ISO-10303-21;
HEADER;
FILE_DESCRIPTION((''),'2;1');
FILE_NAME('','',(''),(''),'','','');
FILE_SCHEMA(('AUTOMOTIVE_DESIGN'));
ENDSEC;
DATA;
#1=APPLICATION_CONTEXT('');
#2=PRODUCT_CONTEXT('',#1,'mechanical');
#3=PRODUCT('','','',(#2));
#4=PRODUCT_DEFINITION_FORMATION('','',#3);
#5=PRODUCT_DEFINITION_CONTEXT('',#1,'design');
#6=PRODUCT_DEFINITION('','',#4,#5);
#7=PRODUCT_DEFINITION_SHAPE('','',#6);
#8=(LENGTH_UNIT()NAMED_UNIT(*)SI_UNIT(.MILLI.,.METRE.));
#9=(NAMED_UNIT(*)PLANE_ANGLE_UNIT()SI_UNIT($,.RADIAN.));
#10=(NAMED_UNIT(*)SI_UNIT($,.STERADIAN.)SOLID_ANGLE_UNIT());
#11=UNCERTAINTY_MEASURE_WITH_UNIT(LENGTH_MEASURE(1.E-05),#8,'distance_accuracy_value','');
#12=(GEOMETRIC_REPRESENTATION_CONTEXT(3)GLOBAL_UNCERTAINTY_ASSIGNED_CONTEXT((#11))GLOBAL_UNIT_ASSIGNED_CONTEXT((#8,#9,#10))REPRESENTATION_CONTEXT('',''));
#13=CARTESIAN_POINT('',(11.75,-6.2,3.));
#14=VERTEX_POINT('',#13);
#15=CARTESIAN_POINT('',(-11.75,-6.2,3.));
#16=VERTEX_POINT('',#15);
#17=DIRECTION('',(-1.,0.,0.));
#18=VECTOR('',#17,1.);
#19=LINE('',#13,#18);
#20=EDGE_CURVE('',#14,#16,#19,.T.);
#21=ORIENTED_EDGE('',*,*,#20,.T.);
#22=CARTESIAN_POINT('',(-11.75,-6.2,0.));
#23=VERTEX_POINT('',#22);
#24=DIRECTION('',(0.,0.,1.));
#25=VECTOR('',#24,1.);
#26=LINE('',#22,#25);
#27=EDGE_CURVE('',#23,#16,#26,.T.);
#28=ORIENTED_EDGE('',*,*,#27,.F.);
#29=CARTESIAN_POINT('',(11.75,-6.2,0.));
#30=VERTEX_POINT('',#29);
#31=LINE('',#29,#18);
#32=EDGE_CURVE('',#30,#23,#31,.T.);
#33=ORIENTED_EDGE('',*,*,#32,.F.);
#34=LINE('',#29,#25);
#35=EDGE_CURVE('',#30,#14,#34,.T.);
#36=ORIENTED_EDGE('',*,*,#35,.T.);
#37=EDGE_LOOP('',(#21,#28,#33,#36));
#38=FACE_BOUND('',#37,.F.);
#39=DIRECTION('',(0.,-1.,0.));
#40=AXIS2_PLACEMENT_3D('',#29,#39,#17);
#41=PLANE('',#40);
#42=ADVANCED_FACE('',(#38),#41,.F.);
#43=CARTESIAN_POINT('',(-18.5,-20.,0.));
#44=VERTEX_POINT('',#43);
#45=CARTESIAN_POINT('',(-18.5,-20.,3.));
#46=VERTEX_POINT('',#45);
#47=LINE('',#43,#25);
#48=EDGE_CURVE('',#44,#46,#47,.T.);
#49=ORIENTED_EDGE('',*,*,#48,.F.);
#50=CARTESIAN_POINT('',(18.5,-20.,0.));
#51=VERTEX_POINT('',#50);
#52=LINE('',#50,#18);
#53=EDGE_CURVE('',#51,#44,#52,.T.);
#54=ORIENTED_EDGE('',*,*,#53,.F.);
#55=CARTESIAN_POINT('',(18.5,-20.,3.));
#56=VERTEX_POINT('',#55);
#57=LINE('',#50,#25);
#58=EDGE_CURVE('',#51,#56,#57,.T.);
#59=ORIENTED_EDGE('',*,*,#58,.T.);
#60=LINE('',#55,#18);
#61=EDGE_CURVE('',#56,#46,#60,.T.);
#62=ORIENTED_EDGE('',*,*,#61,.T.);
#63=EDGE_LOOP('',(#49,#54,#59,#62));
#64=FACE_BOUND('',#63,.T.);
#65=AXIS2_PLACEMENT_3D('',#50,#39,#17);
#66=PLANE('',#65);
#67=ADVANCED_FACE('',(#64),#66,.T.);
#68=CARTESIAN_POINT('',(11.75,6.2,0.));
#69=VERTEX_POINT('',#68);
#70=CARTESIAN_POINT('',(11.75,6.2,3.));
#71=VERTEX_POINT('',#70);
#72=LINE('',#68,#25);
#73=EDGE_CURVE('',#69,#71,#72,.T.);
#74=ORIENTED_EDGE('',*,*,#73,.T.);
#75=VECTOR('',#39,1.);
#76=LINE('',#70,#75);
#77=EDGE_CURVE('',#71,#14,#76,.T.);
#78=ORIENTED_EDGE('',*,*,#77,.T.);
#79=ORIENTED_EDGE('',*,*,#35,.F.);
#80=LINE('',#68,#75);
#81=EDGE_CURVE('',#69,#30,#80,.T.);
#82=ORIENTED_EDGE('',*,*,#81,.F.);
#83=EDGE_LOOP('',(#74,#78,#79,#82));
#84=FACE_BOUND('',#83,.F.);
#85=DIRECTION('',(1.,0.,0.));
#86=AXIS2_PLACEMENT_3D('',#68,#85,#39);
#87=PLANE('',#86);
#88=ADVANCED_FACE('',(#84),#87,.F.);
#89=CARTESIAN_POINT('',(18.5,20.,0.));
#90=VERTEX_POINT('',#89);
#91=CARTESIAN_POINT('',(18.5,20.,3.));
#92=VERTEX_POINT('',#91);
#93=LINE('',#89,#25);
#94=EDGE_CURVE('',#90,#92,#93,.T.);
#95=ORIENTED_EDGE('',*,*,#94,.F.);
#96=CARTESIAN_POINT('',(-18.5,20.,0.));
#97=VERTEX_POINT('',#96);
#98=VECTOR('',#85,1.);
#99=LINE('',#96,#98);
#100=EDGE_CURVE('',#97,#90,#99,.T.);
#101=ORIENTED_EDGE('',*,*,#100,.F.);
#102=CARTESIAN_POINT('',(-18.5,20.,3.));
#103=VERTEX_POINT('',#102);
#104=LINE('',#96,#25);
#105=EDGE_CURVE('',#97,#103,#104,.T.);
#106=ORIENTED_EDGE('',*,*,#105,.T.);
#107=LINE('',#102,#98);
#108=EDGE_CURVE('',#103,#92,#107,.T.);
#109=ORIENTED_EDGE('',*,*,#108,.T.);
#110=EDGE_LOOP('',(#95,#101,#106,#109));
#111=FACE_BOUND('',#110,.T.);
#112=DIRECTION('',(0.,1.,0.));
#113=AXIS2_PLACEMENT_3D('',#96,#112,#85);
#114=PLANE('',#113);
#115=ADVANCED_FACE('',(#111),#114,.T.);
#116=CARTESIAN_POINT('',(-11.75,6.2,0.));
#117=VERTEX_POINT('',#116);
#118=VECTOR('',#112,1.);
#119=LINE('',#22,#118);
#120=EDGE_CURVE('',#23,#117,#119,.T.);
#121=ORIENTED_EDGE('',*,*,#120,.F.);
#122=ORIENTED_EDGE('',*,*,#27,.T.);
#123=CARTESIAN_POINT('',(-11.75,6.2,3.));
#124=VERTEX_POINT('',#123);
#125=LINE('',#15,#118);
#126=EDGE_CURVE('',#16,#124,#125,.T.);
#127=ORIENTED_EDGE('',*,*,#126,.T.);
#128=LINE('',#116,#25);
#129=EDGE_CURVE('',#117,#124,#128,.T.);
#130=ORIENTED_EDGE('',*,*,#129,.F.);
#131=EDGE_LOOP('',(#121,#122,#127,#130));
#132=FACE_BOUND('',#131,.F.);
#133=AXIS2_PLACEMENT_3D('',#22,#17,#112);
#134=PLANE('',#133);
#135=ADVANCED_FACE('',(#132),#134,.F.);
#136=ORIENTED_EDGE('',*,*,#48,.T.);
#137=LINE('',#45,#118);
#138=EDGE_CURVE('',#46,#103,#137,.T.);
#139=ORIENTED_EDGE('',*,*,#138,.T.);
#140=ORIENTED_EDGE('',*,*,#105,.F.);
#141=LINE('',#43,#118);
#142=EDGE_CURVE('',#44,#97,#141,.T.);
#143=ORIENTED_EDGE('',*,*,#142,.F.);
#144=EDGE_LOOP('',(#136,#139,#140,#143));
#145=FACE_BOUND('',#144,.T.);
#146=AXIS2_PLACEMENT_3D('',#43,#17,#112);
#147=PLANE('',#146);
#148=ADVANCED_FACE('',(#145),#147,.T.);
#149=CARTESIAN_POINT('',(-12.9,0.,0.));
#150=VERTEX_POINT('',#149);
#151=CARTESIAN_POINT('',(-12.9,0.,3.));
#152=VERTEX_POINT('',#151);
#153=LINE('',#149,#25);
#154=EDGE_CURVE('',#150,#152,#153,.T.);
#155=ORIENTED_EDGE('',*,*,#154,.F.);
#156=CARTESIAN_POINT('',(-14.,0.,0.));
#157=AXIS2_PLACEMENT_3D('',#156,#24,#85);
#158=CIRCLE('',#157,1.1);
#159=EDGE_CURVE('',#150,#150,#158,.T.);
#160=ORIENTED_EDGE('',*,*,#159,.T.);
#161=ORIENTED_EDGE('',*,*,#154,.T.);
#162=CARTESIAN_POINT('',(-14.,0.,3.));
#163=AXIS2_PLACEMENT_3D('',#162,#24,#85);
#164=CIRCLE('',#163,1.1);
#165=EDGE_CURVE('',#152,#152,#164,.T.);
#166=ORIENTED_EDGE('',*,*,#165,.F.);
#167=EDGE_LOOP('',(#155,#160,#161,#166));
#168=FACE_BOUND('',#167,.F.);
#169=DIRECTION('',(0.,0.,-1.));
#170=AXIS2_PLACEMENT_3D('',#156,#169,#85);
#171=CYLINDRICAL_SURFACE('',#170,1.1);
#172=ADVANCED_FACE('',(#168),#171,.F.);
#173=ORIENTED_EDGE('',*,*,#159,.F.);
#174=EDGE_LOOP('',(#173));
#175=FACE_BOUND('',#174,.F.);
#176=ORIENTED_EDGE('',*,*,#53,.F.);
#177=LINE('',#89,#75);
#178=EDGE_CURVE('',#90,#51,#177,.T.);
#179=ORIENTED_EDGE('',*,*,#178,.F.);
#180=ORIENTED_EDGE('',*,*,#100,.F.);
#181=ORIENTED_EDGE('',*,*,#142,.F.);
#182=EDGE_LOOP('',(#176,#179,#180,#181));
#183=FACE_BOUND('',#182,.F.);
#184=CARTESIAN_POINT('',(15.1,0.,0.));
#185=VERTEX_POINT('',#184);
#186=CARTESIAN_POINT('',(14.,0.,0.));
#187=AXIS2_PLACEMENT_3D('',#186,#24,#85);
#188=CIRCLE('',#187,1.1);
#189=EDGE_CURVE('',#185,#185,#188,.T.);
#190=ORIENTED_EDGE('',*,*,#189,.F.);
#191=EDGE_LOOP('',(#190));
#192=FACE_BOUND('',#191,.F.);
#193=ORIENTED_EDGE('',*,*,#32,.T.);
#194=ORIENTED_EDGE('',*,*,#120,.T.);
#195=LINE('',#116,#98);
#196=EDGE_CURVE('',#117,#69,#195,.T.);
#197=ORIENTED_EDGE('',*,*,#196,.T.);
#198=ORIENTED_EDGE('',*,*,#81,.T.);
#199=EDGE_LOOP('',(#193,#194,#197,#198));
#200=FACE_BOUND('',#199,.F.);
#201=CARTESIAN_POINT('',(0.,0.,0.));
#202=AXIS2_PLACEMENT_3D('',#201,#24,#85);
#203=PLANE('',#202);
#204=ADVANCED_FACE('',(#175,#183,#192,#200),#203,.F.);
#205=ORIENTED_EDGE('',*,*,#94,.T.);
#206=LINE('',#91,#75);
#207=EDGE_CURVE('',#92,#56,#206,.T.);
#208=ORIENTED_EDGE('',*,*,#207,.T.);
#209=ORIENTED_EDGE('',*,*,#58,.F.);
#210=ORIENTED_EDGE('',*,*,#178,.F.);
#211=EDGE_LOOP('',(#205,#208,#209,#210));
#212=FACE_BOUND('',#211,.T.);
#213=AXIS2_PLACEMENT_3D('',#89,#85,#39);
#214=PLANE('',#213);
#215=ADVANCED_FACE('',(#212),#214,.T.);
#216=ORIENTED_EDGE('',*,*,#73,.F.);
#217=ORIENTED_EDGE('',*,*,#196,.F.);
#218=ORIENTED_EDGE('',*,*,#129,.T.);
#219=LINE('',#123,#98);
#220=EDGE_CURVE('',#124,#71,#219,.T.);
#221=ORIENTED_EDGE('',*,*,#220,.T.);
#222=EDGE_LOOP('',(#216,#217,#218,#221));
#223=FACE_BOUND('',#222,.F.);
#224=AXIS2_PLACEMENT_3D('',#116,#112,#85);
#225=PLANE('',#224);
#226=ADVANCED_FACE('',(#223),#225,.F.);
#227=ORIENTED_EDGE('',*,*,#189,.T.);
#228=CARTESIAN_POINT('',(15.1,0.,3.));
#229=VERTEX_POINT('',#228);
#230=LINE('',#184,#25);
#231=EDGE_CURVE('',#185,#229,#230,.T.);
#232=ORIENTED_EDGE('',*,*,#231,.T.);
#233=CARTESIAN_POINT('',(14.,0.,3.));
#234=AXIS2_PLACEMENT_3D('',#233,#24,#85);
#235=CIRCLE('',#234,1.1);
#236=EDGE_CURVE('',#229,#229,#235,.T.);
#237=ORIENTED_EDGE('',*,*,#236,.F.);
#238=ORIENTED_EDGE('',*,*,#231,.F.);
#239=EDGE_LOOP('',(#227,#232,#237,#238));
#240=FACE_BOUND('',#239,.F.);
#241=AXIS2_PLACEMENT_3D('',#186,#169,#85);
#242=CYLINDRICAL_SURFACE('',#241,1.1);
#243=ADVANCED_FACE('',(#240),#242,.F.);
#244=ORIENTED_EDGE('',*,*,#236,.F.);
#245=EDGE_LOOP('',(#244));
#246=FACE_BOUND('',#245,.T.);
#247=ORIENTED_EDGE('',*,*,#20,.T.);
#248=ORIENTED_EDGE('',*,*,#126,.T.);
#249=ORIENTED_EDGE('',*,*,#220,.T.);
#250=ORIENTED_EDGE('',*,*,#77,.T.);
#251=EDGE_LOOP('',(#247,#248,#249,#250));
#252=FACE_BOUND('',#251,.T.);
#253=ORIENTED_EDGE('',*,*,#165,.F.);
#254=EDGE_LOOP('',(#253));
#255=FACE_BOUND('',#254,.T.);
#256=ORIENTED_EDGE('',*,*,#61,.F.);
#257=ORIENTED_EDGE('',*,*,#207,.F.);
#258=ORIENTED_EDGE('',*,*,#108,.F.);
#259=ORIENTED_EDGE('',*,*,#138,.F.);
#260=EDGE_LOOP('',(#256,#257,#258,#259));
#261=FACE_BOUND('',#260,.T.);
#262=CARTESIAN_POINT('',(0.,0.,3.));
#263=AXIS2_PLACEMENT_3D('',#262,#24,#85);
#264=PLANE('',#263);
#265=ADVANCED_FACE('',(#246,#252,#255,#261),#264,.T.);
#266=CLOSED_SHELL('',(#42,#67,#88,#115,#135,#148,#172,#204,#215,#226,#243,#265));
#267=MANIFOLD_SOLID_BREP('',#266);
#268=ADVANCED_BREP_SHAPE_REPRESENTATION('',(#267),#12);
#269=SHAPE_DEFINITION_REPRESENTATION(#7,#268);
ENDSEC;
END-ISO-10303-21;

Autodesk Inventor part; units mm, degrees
ref_plane "YZ Plane" through (0, 0, 0) normal (1, 0, 0) x (0, 1, 0)
ref_plane "XZ Plane" through (0, 0, 0) normal (0, 1, 0) x (-1, 0, 0)
ref_plane "XY Plane" through (0, 0, 0) normal (0, 0, 1) x (1, 0, 0)
sketch "Block1_1" plane through (0, 0, 0) normal (0, 0, 1) x (1, 0, 0)
  circle A0 centre (47.029, 24.2723) radius 1.1
  circle A1 centre (75.029, 24.2723) radius 1.1
  line L0 (49.279, 30.4723) -> (72.779, 30.4723)
  line L1 (72.779, 30.4723) -> (72.779, 18.0723)
  line L2 (72.779, 18.0723) -> (49.279, 18.0723)
  line L3 (49.279, 18.0723) -> (49.279, 30.4723)
  line L4 (49.279, 30.4723) -> (44.779, 30.4723)
  line L5 (44.779, 30.4723) -> (44.779, 18.0723)
  line L6 (44.779, 18.0723) -> (49.279, 18.0723)
  line L7 (49.279, 18.0723) -> (49.279, 30.4723)
  line L8 (72.779, 30.4723) -> (77.279, 30.4723)
  line L9 (77.279, 30.4723) -> (77.279, 18.0723)
  line L10 (77.279, 18.0723) -> (72.779, 18.0723)
  line L11 (72.779, 18.0723) -> (72.779, 30.4723)
  line L12 (44.779, 24.2723) -> (77.279, 24.2723) construction
  line L13 (61.029, 30.4723) -> (61.029, 18.0723) construction
  line L14 (47.029, 30.4723) -> (47.029, 18.0723) construction
  line L15 (75.029, 30.4723) -> (75.029, 18.0723) construction
  line L16 (66.779, 30.4723) -> (66.779, 18.0723) construction
  point P0 (60.979, 24.0984)
  dimension "d2" = 23.5
  dimension "d3" = 12.4
  dimension "d4" = 4.5
  dimension "d5" = 4.5
  dimension "d6" = 2.2
  dimension "d7" = 2.2
  dimension "d8" = 2.25
  dimension "d9" = 6
sketch "Sketch1" plane through (0, 0, 0) normal (0, 0, 1) x (1, 0, 0)
  line L0 (-18.5, 20) -> (18.5, 20)
  line L1 (18.5, 20) -> (18.5, -20)
  line L2 (18.5, -20) -> (-18.5, -20)
  line L3 (-18.5, -20) -> (-18.5, 20)
  circle A0 centre (-14, 0) radius 1.1
  circle A1 centre (14, 0) radius 1.1
  line L4 (-11.75, 6.2) -> (11.75, 6.2)
  line L5 (11.75, 6.2) -> (11.75, -6.2)
  line L6 (11.75, -6.2) -> (-11.75, -6.2)
  line L7 (-11.75, -6.2) -> (-11.75, 6.2)
  line L8 (-11.75, 6.2) -> (-16.25, 6.2)
  line L9 (-16.25, 6.2) -> (-16.25, -6.2)
  line L10 (-16.25, -6.2) -> (-11.75, -6.2)
  line L11 (-11.75, -6.2) -> (-11.75, 6.2)
  line L12 (11.75, 6.2) -> (16.25, 6.2)
  line L13 (16.25, 6.2) -> (16.25, -6.2)
  line L14 (16.25, -6.2) -> (11.75, -6.2)
  line L15 (11.75, -6.2) -> (11.75, 6.2)
  line L16 (-16.25, 0) -> (16.25, 0) construction
  line L17 (0, 6.2) -> (0, -6.2) construction
  line L18 (-14, 6.2) -> (-14, -6.2) construction
  line L19 (14, 6.2) -> (14, -6.2) construction
  line L20 (5.75, 6.2) -> (5.75, -6.2) construction
  point P0 (0, 0)
  point P1 (18.5, 0)
  point P2 (0, 20)
  point P3 (0, 0)
  dimension "d0" = 37
  dimension "d1" = 40
extrude "Extrusion1" add sketch "Sketch1" along normal blind 3 contours L0 L1 L2 L3 | L7 L10 L9 L8 | L12 L13 L14 L5
properties part number "ServoHolderPlate"
